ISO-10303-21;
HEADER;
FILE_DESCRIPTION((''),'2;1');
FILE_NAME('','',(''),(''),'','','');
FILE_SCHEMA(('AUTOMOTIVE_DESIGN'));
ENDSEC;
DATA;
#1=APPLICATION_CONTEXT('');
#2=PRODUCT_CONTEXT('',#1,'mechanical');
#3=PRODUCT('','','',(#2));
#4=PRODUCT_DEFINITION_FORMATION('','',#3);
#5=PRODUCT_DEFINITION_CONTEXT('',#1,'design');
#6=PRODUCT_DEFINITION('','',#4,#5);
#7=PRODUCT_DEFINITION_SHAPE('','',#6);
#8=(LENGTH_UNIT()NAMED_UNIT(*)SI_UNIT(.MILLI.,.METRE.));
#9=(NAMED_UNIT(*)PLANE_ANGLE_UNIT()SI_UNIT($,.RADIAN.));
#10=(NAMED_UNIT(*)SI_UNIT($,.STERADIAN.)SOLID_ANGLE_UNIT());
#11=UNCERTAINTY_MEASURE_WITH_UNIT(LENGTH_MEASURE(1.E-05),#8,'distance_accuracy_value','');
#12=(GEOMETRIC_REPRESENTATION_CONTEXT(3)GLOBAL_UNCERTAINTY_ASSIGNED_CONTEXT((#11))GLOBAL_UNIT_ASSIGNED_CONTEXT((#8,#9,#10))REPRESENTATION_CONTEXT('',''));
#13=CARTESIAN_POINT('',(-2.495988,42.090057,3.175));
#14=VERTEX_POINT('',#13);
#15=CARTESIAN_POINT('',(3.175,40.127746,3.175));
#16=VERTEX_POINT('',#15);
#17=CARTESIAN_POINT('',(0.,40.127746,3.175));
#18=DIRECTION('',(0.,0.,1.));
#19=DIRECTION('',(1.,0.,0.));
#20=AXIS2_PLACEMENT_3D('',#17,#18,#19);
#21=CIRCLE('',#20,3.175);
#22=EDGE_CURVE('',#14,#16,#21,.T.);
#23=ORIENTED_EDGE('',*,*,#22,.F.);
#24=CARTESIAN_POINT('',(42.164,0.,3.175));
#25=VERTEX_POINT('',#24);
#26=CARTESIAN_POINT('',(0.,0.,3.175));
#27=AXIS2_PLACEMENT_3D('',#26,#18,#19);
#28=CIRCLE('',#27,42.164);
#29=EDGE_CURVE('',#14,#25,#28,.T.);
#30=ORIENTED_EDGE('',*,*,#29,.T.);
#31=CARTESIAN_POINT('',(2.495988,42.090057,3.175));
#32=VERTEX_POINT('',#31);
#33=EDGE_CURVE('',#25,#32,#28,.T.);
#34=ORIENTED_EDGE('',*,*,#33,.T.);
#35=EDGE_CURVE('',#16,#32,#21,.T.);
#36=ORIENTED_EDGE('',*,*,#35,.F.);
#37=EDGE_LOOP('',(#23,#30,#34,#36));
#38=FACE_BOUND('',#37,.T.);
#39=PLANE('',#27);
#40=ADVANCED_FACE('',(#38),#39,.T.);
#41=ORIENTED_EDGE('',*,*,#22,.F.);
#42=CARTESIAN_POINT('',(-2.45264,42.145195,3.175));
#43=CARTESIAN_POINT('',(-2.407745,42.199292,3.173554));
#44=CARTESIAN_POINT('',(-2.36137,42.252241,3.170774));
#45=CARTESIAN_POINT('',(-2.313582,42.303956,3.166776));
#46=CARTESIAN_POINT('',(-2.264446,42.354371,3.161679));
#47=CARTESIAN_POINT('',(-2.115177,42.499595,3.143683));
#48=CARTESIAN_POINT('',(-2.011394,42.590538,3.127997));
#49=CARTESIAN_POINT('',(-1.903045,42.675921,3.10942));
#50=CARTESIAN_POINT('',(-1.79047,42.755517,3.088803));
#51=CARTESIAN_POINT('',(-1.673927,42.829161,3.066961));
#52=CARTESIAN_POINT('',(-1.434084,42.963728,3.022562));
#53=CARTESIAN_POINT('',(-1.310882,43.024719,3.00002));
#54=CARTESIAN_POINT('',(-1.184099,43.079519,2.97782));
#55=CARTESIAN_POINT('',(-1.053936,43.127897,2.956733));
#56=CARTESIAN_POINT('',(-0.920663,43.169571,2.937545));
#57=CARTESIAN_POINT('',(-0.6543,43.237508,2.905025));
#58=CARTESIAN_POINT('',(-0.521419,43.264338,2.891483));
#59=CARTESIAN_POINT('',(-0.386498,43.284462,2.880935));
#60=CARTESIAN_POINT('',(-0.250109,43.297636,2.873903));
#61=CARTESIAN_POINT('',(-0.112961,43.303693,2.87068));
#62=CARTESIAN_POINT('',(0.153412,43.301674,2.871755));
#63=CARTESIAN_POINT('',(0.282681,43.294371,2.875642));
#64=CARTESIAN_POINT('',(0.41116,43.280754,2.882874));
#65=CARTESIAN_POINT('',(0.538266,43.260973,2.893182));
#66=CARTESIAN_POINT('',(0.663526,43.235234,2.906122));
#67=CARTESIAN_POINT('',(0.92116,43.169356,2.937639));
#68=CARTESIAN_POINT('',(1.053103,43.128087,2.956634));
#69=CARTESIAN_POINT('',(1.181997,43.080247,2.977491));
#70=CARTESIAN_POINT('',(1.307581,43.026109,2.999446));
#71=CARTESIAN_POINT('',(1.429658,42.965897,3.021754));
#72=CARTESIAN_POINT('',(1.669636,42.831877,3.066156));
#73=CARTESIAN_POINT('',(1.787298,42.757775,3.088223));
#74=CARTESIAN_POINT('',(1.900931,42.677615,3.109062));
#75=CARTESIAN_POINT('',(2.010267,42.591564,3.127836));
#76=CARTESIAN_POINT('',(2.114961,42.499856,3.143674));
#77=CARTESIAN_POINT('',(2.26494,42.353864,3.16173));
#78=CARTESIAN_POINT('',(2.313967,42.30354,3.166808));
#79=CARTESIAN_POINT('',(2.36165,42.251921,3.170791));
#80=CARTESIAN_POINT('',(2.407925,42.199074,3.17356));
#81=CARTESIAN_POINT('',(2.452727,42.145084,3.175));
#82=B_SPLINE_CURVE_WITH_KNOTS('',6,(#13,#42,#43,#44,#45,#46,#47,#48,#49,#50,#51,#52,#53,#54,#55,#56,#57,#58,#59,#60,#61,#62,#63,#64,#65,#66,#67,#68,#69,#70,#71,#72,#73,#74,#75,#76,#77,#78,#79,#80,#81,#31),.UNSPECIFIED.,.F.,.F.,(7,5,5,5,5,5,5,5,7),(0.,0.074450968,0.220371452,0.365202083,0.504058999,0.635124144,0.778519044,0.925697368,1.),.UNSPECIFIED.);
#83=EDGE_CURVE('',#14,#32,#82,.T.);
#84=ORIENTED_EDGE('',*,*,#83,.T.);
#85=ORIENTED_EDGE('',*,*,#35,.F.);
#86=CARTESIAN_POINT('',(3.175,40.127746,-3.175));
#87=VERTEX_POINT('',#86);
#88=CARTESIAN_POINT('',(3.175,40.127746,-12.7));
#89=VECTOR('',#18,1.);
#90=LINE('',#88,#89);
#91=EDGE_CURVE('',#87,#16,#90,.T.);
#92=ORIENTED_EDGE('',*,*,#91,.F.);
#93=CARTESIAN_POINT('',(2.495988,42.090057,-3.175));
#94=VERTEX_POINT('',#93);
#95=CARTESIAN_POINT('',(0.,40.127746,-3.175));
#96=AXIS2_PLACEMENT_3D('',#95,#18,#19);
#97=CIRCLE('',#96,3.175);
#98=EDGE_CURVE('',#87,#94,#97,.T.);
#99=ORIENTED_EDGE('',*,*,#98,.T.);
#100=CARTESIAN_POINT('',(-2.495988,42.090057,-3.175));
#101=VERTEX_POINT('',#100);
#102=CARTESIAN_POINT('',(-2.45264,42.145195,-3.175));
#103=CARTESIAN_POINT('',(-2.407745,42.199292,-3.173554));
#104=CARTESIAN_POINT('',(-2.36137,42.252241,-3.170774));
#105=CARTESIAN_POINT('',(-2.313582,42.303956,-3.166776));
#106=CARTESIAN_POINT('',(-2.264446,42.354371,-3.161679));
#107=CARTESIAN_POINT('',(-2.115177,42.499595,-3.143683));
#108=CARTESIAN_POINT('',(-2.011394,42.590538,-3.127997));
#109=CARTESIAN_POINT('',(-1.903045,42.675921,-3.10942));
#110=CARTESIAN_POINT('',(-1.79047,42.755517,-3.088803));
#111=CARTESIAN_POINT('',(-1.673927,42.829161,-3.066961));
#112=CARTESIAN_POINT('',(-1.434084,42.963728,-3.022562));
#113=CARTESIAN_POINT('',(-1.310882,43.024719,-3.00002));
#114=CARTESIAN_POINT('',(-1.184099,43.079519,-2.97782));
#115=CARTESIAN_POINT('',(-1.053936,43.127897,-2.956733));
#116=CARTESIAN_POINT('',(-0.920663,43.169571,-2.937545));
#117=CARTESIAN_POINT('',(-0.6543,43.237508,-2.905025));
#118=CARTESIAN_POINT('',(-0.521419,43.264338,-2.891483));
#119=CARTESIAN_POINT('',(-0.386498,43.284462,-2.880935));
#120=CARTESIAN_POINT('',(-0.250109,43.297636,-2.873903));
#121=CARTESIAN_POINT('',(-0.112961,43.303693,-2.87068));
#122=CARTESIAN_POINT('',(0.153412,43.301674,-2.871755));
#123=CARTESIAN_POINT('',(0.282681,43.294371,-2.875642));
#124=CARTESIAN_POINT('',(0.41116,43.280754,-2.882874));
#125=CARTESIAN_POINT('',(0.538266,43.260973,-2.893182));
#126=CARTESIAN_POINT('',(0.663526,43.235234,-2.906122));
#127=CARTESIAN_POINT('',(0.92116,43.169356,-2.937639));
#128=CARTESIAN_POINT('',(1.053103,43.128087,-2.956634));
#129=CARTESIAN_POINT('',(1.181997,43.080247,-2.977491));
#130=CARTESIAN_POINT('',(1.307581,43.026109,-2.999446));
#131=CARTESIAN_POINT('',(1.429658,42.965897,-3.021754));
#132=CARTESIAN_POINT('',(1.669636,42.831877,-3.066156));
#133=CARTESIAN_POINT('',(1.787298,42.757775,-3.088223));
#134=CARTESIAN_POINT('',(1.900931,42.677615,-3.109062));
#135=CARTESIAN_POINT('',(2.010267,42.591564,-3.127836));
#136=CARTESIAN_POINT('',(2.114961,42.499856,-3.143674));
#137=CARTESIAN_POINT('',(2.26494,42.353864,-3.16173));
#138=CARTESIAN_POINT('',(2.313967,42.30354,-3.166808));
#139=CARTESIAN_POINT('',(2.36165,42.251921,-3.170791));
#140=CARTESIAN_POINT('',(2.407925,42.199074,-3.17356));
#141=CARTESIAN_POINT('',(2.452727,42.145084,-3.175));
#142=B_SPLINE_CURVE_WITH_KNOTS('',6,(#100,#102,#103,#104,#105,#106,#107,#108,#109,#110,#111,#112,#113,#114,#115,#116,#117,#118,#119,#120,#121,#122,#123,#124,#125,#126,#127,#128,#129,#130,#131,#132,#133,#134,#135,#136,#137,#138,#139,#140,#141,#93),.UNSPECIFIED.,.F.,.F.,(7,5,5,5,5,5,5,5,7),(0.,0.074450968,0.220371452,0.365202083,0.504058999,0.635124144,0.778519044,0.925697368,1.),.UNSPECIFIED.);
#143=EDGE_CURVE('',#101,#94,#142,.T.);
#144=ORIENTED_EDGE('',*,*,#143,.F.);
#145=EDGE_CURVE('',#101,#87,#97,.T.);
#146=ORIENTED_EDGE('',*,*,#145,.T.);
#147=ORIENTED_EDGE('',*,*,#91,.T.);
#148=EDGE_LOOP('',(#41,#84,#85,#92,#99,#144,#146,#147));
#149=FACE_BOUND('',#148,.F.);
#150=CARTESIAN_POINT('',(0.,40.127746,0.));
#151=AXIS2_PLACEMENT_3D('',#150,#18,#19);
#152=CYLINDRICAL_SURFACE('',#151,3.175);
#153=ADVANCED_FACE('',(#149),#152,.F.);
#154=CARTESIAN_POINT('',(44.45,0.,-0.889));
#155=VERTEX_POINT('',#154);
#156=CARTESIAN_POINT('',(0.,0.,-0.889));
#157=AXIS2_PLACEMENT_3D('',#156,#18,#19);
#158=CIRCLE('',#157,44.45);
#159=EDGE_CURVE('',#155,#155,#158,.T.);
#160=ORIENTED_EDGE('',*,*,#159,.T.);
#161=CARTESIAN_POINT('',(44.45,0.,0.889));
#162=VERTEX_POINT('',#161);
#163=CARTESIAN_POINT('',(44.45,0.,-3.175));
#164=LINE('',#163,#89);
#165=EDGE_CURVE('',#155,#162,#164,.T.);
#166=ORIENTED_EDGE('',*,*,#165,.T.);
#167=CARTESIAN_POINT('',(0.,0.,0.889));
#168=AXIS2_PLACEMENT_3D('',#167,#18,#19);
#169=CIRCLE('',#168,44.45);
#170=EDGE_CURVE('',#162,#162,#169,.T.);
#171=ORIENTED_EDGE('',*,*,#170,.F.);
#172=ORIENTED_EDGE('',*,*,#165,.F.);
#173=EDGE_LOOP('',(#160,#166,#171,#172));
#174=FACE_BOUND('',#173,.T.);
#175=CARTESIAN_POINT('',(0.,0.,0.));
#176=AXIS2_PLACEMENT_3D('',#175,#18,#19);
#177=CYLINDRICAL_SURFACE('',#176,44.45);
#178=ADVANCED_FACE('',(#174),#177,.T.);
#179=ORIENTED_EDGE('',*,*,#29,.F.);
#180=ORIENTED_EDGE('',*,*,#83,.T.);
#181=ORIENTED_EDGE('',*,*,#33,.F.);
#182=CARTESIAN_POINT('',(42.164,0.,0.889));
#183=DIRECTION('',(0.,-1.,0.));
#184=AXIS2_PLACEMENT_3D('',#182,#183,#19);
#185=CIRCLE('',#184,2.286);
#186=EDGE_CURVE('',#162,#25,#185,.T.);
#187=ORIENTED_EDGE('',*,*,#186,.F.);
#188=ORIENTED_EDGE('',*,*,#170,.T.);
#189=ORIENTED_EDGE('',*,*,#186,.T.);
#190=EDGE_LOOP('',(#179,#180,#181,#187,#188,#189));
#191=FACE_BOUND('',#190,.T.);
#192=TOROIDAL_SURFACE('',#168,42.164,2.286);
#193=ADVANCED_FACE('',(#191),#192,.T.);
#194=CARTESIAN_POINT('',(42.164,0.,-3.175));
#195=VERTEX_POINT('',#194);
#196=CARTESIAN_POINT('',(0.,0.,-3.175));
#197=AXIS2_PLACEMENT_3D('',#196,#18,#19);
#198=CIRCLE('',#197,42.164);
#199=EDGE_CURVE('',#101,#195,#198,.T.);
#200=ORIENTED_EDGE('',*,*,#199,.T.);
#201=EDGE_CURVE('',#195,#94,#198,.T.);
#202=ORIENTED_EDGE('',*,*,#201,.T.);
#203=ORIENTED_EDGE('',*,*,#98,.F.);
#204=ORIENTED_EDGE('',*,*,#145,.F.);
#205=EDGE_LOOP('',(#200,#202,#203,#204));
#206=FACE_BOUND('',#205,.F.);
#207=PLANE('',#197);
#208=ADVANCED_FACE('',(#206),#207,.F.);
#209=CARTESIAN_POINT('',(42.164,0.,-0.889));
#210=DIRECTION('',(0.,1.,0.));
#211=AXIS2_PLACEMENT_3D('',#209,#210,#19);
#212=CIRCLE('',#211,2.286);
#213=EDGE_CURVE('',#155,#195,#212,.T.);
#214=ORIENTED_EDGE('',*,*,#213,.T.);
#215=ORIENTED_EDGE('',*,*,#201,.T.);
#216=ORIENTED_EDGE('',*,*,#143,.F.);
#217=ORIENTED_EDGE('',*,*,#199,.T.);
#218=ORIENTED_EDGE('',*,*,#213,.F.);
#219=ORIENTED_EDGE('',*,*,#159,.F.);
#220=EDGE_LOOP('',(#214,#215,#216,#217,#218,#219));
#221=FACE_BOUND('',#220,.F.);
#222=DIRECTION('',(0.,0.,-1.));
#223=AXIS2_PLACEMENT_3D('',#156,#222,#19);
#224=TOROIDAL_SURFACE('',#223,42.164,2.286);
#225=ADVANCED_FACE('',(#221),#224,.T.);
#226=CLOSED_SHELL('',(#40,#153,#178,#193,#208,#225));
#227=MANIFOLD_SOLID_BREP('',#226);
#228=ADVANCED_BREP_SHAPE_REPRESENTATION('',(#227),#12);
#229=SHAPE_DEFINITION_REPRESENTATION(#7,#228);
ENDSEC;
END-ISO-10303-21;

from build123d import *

# Parameters (mm, degrees)
F0_R     = 44.45
F1_DEPTH = 3.175
F2_R     = 3.175
F3_DEPTH = 12.7


# Not quite as in the source:
# - a fillet or chamfer that OpenCascade refuses, or shapes differently, is made with other operations: its cross-section is extruded or revolved along the edge and cut away or added


with BuildPart() as f1:
    # F0 (on Top) → F1 (new body, symmetric)
    with BuildSketch(Plane.XY):
        Circle(F0_R)
    extrude(amount=F1_DEPTH, both=True)

    # F2 (on Top) → F3 (cut, symmetric)
    with BuildSketch(Plane.XY):
        with Locations((0, 40.1277458341)):
            Circle(F2_R)
    extrude(amount=F3_DEPTH, both=True, mode=Mode.SUBTRACT)

    # F4: fillet of radius 2.286 on 2 edges, made by hand

    # F4_s1 → F4_t2 (revolve, cut)
    with BuildSketch(Plane.XZ):
        with BuildLine():
            ThreePointArc((44.45, 0.889), (43.7804461018, 2.5054461018), (42.164, 3.175))
            Line((42.164, 3.175), (44.45, 3.175))
            Line((44.45, 3.175), (44.45, 0.889))
        make_face()
    revolve(axis=Axis((0, 0, 3.175), (0, 0, 1)), mode=Mode.SUBTRACT)

    # F4_s3 → F4_t4 (revolve, cut)
    with BuildSketch(Plane.XZ):
        with BuildLine():
            ThreePointArc((44.45, -0.889), (43.7804461018, -2.5054461018), (42.164, -3.175))
            Line((42.164, -3.175), (44.45, -3.175))
            Line((44.45, -3.175), (44.45, -0.889))
        make_face()
    revolve(axis=Axis((0, 0, -3.175), (0, 0, 1)), mode=Mode.SUBTRACT)


solid = f1.part
